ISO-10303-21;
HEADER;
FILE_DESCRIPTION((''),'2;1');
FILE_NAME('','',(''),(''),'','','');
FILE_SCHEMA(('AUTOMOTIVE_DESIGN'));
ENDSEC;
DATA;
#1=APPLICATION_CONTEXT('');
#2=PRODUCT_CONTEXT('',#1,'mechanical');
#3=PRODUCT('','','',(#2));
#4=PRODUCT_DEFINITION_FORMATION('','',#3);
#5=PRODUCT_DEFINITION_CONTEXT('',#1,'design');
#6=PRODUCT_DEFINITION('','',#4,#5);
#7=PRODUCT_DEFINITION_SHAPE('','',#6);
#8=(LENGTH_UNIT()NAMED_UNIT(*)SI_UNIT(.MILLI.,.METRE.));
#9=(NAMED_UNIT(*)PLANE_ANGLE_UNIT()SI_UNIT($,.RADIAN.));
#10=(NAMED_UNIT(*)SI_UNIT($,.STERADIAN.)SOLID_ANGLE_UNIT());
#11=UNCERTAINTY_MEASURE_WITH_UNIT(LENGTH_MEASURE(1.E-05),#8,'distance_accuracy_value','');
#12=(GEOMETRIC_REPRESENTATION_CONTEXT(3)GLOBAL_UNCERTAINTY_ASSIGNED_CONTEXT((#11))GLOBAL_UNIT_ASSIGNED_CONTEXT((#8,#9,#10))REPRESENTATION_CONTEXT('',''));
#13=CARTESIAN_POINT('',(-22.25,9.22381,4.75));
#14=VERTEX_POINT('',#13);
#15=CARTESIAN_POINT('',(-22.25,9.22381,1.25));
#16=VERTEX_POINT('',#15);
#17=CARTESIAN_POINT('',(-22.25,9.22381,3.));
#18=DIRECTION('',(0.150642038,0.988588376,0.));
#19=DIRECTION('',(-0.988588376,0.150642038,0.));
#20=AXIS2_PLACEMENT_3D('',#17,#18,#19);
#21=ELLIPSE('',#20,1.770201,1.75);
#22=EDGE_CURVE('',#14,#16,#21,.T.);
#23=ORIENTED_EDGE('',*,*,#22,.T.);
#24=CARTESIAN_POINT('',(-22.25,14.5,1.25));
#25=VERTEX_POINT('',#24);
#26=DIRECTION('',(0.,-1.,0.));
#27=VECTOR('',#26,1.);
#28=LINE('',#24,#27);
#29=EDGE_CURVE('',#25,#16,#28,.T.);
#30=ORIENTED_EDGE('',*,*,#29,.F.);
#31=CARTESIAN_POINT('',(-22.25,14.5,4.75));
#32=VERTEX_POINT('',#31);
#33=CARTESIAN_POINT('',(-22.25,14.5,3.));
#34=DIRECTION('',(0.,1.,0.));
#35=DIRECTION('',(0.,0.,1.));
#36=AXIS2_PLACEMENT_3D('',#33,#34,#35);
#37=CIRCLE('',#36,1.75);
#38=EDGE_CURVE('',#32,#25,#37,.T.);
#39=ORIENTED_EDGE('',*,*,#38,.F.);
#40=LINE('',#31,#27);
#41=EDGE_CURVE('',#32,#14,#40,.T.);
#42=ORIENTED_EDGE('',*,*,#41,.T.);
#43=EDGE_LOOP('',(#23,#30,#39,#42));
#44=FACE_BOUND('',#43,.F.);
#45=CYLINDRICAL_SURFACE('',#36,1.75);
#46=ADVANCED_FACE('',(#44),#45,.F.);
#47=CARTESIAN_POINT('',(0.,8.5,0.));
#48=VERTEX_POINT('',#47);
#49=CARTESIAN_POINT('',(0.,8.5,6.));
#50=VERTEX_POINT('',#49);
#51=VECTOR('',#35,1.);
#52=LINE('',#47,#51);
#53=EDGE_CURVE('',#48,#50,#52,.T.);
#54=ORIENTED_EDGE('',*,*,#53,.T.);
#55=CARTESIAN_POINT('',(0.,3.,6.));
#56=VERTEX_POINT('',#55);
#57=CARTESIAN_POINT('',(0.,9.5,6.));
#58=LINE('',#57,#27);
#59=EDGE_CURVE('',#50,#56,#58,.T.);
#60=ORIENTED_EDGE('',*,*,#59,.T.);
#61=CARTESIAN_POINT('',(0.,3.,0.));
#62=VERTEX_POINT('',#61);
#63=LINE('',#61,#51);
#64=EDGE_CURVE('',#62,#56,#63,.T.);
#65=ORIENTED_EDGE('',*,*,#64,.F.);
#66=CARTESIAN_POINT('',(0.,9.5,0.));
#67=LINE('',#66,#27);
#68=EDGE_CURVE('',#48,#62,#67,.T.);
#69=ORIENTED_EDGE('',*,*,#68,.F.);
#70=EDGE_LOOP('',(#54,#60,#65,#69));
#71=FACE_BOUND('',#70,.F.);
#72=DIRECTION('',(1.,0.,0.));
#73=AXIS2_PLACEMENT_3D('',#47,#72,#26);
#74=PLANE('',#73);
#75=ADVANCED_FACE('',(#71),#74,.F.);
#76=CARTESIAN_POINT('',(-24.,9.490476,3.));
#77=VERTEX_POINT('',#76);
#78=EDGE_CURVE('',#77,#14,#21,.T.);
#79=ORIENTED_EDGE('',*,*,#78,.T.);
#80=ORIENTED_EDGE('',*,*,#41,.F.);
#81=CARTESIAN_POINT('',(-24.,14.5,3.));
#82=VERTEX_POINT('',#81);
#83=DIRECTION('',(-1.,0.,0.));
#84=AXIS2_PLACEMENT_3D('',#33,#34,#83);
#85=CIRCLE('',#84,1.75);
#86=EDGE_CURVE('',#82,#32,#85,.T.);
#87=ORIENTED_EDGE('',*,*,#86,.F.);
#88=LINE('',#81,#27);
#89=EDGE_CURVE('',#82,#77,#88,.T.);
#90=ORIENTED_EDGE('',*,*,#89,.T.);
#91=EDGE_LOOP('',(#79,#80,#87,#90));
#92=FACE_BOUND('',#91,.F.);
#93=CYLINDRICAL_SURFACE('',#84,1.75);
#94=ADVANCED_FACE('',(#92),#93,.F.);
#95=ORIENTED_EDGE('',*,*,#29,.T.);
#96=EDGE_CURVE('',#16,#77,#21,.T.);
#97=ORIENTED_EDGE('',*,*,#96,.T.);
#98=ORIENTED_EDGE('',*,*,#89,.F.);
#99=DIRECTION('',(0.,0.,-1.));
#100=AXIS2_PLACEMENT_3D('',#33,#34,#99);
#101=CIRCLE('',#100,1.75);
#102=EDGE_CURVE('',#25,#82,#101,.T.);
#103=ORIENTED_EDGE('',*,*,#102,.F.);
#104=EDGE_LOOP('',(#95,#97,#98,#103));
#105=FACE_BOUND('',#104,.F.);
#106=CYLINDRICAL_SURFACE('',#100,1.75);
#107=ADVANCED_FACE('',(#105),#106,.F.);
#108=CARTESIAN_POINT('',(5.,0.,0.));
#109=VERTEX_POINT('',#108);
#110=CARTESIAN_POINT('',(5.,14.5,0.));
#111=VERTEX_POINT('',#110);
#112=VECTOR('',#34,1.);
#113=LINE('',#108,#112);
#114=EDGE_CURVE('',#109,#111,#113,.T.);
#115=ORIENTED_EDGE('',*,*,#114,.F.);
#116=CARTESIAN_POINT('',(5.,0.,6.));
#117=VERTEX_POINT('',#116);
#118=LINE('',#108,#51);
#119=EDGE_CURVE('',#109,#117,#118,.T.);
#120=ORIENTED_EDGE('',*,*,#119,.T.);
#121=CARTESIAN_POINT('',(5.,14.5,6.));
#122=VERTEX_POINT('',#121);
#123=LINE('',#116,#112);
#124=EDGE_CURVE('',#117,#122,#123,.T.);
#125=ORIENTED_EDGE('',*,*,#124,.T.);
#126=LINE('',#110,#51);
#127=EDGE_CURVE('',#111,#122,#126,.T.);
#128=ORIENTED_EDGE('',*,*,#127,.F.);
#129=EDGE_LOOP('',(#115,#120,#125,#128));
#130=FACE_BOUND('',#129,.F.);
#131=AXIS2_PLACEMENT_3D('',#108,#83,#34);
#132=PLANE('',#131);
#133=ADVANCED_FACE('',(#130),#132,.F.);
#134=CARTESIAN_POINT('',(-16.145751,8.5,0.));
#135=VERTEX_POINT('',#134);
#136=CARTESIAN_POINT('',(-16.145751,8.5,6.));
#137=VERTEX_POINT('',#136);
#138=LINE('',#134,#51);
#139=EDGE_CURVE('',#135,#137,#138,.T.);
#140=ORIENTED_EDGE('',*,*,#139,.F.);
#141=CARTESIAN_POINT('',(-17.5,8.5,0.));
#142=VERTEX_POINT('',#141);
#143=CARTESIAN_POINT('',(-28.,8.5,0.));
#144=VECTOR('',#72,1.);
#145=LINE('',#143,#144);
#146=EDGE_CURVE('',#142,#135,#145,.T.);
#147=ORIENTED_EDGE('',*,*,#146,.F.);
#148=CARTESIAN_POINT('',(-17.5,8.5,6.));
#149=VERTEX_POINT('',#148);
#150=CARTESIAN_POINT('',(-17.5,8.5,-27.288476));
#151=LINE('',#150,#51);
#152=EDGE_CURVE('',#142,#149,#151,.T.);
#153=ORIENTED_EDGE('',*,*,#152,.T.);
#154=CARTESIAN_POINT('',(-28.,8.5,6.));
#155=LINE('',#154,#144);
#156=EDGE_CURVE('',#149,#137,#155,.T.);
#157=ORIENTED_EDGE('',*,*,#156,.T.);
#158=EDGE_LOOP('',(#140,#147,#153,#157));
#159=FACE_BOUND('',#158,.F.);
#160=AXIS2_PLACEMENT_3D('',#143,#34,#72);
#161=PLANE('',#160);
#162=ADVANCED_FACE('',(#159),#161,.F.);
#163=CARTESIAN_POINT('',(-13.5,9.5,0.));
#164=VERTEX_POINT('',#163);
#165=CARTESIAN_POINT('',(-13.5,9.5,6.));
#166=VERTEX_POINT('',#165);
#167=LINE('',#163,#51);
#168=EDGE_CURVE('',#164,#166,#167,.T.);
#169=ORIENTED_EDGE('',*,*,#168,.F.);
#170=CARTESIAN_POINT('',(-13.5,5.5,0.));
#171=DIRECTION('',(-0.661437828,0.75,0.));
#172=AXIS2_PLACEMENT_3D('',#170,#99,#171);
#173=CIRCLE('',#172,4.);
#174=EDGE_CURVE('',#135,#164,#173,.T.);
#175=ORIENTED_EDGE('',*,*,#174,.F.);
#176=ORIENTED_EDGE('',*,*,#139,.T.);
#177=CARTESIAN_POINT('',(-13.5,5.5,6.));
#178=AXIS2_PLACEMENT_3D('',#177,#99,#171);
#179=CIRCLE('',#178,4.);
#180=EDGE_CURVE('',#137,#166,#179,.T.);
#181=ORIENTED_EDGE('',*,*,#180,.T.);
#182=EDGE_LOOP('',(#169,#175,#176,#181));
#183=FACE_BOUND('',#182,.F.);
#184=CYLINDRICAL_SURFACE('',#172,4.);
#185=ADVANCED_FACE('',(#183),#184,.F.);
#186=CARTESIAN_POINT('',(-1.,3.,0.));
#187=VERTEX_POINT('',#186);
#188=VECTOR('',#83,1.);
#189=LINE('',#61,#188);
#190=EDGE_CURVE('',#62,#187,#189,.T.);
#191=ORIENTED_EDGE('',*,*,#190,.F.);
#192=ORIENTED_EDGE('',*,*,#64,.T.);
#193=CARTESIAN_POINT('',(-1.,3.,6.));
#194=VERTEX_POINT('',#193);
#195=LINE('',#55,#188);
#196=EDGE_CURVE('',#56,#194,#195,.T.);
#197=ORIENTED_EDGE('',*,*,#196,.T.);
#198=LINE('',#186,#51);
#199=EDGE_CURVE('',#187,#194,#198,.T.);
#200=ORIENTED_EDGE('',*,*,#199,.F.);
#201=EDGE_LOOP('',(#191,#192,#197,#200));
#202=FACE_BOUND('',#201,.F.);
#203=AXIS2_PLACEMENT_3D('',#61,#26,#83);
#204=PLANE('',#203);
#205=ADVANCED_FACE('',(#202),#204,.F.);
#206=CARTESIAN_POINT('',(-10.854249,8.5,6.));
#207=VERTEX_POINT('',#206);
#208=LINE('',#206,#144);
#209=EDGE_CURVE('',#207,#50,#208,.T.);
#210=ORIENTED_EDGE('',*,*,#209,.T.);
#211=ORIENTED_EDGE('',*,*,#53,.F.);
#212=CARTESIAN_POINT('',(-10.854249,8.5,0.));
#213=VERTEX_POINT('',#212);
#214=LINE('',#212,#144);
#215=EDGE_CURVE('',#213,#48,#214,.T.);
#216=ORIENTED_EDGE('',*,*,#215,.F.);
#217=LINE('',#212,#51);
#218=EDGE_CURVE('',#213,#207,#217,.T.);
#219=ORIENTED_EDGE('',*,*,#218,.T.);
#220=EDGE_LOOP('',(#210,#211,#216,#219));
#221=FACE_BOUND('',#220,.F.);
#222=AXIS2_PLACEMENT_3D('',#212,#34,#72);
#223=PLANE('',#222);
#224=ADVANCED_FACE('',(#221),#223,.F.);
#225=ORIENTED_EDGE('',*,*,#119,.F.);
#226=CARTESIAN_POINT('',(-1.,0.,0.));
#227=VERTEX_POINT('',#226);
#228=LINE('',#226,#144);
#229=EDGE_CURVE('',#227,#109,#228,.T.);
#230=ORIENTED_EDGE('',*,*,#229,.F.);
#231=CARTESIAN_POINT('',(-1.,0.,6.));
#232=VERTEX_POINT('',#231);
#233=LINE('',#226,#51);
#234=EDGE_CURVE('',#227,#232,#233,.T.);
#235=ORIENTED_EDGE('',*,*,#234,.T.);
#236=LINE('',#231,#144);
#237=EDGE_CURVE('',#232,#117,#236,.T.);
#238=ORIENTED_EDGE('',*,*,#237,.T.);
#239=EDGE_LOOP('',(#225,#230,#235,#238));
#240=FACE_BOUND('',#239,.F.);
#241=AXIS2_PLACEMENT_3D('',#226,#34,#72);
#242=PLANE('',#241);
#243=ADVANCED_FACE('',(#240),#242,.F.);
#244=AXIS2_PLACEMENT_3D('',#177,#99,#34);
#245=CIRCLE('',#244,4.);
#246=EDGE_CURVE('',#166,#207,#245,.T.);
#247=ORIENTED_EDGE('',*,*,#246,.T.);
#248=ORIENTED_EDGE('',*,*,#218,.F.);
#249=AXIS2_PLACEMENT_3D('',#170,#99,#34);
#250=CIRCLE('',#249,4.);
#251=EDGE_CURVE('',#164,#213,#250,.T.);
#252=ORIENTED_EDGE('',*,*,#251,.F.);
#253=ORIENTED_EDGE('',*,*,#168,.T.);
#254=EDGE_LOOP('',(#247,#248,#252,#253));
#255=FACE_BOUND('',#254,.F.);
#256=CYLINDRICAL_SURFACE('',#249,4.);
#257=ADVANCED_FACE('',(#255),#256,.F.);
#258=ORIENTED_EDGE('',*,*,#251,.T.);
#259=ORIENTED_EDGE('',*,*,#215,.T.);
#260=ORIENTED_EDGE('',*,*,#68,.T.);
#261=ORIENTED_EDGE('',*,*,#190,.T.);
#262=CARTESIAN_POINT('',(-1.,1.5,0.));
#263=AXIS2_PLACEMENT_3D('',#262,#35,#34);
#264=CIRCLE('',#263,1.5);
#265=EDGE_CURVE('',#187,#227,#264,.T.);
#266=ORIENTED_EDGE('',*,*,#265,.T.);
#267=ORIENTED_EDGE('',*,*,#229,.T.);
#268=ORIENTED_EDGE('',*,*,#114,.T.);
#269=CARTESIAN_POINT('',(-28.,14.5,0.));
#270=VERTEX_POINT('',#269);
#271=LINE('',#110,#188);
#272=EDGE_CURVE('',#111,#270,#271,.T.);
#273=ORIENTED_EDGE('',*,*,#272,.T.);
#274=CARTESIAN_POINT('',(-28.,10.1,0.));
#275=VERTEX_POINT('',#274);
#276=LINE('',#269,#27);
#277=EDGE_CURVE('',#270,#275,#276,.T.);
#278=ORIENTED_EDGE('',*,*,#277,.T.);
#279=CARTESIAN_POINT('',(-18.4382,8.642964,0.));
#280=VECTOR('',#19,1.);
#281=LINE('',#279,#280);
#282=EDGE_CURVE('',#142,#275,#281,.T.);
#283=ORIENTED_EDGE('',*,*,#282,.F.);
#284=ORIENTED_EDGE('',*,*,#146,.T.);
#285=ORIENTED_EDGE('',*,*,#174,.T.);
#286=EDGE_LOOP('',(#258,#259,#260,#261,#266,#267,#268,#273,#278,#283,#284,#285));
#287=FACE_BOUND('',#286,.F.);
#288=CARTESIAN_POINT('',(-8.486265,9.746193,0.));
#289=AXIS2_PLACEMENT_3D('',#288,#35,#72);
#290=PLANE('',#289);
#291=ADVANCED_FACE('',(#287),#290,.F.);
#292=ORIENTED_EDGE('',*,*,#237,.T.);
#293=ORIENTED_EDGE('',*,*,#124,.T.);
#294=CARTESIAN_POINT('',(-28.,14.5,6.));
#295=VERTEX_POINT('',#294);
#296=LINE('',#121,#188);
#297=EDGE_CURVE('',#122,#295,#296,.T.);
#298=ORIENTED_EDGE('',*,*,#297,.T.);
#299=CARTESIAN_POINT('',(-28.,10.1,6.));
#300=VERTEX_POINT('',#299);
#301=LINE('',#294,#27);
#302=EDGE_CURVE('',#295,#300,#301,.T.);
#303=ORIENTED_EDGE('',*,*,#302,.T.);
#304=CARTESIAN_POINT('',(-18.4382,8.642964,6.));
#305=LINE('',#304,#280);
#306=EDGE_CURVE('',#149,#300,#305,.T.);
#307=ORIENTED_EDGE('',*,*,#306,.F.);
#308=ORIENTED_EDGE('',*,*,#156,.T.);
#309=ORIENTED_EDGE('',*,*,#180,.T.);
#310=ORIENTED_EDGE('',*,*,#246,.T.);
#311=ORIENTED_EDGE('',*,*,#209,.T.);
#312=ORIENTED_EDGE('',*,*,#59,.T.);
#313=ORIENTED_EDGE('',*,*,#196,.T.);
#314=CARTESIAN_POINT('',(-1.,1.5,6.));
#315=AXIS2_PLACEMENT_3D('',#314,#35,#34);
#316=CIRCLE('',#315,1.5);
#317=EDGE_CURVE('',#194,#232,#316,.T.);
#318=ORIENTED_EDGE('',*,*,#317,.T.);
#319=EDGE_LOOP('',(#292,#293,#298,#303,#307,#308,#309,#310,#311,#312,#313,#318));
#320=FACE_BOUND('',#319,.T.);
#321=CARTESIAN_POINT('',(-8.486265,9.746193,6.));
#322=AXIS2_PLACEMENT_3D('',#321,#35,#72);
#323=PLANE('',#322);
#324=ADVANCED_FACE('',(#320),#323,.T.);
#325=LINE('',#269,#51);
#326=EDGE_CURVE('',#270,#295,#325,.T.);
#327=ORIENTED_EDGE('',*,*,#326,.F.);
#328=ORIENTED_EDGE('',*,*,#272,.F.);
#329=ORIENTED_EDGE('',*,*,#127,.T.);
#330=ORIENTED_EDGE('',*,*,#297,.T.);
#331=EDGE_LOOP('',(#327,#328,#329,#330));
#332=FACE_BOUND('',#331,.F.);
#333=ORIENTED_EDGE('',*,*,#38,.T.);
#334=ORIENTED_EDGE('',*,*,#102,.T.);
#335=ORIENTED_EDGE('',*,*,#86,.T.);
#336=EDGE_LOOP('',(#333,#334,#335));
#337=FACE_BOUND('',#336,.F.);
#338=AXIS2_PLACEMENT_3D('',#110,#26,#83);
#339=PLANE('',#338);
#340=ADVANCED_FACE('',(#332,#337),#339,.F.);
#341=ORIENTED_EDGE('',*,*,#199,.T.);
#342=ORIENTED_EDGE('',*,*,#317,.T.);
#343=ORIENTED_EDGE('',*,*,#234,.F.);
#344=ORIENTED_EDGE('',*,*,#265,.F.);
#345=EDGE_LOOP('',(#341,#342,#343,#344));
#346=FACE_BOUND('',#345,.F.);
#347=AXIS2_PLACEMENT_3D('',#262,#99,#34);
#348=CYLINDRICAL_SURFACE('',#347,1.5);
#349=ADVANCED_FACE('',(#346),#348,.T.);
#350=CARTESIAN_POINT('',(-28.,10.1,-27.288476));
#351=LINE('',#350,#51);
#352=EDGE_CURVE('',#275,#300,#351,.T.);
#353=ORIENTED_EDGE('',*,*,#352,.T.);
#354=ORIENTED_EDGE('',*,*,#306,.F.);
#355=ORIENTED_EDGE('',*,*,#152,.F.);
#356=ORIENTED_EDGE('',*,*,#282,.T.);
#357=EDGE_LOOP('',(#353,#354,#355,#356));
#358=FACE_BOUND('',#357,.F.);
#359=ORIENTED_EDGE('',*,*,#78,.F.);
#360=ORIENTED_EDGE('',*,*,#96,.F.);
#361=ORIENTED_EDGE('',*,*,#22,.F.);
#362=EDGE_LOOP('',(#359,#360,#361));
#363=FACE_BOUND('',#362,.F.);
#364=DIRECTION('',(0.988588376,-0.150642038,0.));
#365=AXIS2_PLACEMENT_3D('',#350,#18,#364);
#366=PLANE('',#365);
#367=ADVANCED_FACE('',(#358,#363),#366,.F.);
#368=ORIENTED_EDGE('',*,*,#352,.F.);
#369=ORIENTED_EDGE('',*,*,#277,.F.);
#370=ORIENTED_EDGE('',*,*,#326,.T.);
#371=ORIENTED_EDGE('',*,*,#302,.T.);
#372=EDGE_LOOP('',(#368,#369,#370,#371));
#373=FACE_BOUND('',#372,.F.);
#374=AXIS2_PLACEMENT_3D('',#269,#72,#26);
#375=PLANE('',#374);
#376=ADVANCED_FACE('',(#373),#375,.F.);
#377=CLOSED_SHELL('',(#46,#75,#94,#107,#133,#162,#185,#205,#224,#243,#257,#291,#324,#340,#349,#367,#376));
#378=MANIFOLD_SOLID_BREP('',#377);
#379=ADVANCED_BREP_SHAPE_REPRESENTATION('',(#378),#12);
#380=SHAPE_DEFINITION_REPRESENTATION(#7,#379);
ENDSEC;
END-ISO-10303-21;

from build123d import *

# Parameters (mm, degrees)
F1_DEPTH    = 6
F3_DEPTH    = 25
F4_T1_DEPTH = 60.5769524325


# Not quite as in the source:
# - a fillet or chamfer that OpenCascade refuses, or shapes differently, is made with other operations: its cross-section is extruded or revolved along the edge and cut away or added
# - a feature names something its author has since deleted; it is built from what else it names


with BuildPart() as f1:
    # F0 (on Top) → F1 (new body)
    with BuildSketch(Plane.XY):
        with BuildLine():
            Line((-1, 0), (0, 0))
            Line((0, 0), (5, 0))
            Line((5, 0), (5, 14.5))
            Line((5, 14.5), (-28, 14.5))
            Line((-28, 14.5), (-28, 9.5))
            Line((-28, 9.5), (-13.5, 9.5))
            Line((-13.5, 9.5), (0, 9.5))
            Line((0, 9.5), (0, 8.5))
            Line((0, 8.5), (0, 3))
            Line((0, 3), (-1, 3))
            ThreePointArc((-1, 3), (-2.5, 1.5), (-1, 0))
        make_face()
        with BuildLine():
            Line((-10.8542486889, 8.5), (0, 8.5))
            Line((0, 8.5), (0, 9.5))
            Line((0, 9.5), (-13.5, 9.5))
            ThreePointArc((-13.5, 9.5), (-12.0857864376, 9.2416573868), (-10.8542486889, 8.5))
        make_face()
        with BuildLine():
            Line((-13.5, 9.5), (-28, 9.5))
            Line((-28, 9.5), (-28, 8.5))
            Line((-28, 8.5), (-16.1457513111, 8.5))
            ThreePointArc((-16.1457513111, 8.5), (-14.9142135624, 9.2416573868), (-13.5, 9.5))
        make_face()
    extrude(amount=F1_DEPTH)

    # F2 (on face) → F3 (cut)
    with BuildSketch(Plane(origin=(0, 14.5, 0), x_dir=(-1, 0, 0), z_dir=(0, 1, 0))):
        with BuildLine():
            ThreePointArc((22.25, 1.25), (23.4874368671, 1.7625631329), (24, 3))
            ThreePointArc((24, 3), (23.4874368671, 4.2374368671), (22.25, 4.75))
            Line((22.25, 4.75), (22.25, 1.25))
        make_face()
        with BuildLine():
            Line((22.25, 1.25), (22.25, 4.75))
            ThreePointArc((22.25, 4.75), (20.5, 3), (22.25, 1.25))
        make_face()
    extrude(amount=-F3_DEPTH, mode=Mode.SUBTRACT)

    # F4: chamfer of 10.5 x 1.6 on 1 edges, made by hand

    # F4_s2 → F4_t1 (cut)
    with BuildSketch(Plane.XY.offset(-27.2884762162)):
        Polygon((-28, 10.1), (-17.5, 8.5), (-28, 8.5), align=None)
    extrude(amount=F4_T1_DEPTH, mode=Mode.SUBTRACT)


solid = f1.part
